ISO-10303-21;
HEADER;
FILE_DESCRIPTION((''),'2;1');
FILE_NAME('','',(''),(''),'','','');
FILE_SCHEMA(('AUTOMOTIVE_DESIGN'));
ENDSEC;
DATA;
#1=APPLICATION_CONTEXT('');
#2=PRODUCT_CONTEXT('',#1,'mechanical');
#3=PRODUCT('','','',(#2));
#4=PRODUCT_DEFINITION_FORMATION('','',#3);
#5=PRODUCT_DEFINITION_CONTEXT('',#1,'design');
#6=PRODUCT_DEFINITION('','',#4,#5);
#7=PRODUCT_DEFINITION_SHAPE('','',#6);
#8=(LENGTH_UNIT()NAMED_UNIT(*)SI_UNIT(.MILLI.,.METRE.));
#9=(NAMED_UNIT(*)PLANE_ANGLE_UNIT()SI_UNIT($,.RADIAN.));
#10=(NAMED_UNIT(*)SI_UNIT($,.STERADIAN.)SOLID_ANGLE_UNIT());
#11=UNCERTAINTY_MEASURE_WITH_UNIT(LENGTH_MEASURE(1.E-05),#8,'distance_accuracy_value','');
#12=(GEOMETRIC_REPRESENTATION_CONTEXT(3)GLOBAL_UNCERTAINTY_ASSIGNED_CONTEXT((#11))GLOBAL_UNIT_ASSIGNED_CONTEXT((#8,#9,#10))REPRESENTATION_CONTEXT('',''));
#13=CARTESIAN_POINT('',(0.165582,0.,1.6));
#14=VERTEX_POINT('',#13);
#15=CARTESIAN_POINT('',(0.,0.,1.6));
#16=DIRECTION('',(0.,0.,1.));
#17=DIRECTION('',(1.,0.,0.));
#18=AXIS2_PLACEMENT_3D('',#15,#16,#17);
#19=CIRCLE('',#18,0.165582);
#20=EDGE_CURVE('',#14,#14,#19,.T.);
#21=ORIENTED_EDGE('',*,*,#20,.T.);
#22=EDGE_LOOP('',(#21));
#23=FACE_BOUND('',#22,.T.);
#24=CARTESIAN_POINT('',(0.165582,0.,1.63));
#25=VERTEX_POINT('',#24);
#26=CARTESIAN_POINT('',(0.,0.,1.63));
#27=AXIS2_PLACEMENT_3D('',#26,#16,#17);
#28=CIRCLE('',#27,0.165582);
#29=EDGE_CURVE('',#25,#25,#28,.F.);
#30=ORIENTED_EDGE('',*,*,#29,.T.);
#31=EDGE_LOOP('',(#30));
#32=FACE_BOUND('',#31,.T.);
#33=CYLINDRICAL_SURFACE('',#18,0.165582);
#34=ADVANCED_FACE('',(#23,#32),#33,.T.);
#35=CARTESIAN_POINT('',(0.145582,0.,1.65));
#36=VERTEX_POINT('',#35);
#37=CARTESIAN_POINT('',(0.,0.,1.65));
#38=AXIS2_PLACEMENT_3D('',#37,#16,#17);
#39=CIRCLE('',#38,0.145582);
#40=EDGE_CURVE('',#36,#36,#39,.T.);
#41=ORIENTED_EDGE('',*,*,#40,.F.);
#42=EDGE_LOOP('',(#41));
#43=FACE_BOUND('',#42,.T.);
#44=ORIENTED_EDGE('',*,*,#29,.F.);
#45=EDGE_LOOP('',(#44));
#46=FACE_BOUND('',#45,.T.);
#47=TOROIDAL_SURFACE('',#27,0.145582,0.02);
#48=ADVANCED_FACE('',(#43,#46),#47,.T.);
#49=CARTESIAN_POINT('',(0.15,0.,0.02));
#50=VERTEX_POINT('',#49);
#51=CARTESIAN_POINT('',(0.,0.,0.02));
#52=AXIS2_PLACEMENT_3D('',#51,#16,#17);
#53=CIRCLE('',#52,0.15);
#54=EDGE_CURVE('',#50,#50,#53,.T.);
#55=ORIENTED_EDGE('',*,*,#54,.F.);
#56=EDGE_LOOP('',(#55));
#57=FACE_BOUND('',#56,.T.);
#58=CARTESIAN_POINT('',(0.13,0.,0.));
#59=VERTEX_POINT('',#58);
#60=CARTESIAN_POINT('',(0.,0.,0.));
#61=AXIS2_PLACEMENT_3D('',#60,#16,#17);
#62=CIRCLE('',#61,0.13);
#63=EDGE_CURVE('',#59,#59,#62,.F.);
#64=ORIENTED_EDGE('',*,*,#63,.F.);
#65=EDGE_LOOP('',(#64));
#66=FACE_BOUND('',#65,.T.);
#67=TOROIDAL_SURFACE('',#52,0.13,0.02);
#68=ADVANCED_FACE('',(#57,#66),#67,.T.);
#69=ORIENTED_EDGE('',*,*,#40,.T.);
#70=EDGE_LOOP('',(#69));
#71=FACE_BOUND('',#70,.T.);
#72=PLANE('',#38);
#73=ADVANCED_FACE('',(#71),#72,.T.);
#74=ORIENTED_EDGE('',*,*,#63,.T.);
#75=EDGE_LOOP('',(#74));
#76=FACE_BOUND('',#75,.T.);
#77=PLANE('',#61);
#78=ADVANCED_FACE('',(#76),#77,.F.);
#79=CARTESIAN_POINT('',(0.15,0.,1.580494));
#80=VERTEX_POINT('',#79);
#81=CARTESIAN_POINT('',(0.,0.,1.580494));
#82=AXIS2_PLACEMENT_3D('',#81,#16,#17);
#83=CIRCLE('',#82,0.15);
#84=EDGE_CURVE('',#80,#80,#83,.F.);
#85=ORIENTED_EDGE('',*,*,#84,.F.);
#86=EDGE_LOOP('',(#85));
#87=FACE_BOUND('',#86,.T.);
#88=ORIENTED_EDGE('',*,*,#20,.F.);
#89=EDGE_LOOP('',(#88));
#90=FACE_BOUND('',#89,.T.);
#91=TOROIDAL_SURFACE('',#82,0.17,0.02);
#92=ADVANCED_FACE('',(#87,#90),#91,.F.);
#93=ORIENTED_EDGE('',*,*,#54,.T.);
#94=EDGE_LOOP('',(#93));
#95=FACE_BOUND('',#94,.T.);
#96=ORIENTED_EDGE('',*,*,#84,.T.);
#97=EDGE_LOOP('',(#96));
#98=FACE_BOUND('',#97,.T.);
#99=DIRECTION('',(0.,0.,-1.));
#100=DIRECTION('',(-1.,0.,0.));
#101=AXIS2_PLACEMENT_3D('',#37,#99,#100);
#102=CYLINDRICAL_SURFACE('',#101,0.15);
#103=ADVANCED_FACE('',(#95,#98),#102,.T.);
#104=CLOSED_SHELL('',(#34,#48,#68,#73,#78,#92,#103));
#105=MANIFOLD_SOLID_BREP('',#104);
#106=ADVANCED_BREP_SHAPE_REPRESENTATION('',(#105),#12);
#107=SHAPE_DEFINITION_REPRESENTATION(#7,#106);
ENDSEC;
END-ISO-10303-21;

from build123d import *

# Parameters (mm, degrees)
SKETCH1_R           = 0.15
BOSS_EXTRUDE1_DEPTH = 1.65
SKETCH2_R           = 0.165582224
BOSS_EXTRUDE2_DEPTH = 0.05
FILLET1_R           = 0.02
FILLET2_R           = 0.02
FILLET3_R           = 0.02


with BuildPart() as part:
    # Sketch1 → Boss-Extrude1 (new body)
    with BuildSketch(Plane.XY):
        Circle(SKETCH1_R)
    extrude(amount=BOSS_EXTRUDE1_DEPTH)

    # Sketch2 → Boss-Extrude2 (add)
    with BuildSketch(Plane.XY.offset(1.65)):
        Circle(SKETCH2_R)
    extrude(amount=-BOSS_EXTRUDE2_DEPTH)

    # Fillet1
    fillet1_edges = [part.edges().sort_by_distance(p)[0] for p in [
        (-0.165582224, 0, 1.65),
    ]]
    fillet(fillet1_edges, radius=FILLET1_R)

    # Fillet2
    # the kernel refuses this fillet: 0.02 mm, written as the material it adds along each edge
    with BuildSketch(Plane(origin=(0, 0, 1.6), x_dir=(1, 0, 0), z_dir=(0, 1, 0))) as fillet2_piece_1_section:
        with BuildLine():
            CenterArc((0.15 + FILLET2_R, FILLET2_R), FILLET2_R, 180, 90)
            Line((0.15, FILLET2_R), (0.15, 0))
            Line((0.15, 0), (0.15 + FILLET2_R, 0))
        make_face()
    fillet2_piece_1 = revolve(axis=Axis((0, 0, 1.6), (0, 0, -1)), mode=Mode.PRIVATE)
    fillet2_piece_1 = fillet2_piece_1 & Plane(origin=(0, 0, 1.592769075), x_dir=(1, 0, 0), z_dir=(0, 0, 1)) * Cylinder(0.165582224, 1, mode=Mode.PRIVATE)
    add(fillet2_piece_1)

    # Fillet3
    fillet3_edges = [part.edges().sort_by_distance(p)[0] for p in [
        (-0.15, 0, 0),
    ]]
    fillet(fillet3_edges, radius=FILLET3_R)


solid = part.part
